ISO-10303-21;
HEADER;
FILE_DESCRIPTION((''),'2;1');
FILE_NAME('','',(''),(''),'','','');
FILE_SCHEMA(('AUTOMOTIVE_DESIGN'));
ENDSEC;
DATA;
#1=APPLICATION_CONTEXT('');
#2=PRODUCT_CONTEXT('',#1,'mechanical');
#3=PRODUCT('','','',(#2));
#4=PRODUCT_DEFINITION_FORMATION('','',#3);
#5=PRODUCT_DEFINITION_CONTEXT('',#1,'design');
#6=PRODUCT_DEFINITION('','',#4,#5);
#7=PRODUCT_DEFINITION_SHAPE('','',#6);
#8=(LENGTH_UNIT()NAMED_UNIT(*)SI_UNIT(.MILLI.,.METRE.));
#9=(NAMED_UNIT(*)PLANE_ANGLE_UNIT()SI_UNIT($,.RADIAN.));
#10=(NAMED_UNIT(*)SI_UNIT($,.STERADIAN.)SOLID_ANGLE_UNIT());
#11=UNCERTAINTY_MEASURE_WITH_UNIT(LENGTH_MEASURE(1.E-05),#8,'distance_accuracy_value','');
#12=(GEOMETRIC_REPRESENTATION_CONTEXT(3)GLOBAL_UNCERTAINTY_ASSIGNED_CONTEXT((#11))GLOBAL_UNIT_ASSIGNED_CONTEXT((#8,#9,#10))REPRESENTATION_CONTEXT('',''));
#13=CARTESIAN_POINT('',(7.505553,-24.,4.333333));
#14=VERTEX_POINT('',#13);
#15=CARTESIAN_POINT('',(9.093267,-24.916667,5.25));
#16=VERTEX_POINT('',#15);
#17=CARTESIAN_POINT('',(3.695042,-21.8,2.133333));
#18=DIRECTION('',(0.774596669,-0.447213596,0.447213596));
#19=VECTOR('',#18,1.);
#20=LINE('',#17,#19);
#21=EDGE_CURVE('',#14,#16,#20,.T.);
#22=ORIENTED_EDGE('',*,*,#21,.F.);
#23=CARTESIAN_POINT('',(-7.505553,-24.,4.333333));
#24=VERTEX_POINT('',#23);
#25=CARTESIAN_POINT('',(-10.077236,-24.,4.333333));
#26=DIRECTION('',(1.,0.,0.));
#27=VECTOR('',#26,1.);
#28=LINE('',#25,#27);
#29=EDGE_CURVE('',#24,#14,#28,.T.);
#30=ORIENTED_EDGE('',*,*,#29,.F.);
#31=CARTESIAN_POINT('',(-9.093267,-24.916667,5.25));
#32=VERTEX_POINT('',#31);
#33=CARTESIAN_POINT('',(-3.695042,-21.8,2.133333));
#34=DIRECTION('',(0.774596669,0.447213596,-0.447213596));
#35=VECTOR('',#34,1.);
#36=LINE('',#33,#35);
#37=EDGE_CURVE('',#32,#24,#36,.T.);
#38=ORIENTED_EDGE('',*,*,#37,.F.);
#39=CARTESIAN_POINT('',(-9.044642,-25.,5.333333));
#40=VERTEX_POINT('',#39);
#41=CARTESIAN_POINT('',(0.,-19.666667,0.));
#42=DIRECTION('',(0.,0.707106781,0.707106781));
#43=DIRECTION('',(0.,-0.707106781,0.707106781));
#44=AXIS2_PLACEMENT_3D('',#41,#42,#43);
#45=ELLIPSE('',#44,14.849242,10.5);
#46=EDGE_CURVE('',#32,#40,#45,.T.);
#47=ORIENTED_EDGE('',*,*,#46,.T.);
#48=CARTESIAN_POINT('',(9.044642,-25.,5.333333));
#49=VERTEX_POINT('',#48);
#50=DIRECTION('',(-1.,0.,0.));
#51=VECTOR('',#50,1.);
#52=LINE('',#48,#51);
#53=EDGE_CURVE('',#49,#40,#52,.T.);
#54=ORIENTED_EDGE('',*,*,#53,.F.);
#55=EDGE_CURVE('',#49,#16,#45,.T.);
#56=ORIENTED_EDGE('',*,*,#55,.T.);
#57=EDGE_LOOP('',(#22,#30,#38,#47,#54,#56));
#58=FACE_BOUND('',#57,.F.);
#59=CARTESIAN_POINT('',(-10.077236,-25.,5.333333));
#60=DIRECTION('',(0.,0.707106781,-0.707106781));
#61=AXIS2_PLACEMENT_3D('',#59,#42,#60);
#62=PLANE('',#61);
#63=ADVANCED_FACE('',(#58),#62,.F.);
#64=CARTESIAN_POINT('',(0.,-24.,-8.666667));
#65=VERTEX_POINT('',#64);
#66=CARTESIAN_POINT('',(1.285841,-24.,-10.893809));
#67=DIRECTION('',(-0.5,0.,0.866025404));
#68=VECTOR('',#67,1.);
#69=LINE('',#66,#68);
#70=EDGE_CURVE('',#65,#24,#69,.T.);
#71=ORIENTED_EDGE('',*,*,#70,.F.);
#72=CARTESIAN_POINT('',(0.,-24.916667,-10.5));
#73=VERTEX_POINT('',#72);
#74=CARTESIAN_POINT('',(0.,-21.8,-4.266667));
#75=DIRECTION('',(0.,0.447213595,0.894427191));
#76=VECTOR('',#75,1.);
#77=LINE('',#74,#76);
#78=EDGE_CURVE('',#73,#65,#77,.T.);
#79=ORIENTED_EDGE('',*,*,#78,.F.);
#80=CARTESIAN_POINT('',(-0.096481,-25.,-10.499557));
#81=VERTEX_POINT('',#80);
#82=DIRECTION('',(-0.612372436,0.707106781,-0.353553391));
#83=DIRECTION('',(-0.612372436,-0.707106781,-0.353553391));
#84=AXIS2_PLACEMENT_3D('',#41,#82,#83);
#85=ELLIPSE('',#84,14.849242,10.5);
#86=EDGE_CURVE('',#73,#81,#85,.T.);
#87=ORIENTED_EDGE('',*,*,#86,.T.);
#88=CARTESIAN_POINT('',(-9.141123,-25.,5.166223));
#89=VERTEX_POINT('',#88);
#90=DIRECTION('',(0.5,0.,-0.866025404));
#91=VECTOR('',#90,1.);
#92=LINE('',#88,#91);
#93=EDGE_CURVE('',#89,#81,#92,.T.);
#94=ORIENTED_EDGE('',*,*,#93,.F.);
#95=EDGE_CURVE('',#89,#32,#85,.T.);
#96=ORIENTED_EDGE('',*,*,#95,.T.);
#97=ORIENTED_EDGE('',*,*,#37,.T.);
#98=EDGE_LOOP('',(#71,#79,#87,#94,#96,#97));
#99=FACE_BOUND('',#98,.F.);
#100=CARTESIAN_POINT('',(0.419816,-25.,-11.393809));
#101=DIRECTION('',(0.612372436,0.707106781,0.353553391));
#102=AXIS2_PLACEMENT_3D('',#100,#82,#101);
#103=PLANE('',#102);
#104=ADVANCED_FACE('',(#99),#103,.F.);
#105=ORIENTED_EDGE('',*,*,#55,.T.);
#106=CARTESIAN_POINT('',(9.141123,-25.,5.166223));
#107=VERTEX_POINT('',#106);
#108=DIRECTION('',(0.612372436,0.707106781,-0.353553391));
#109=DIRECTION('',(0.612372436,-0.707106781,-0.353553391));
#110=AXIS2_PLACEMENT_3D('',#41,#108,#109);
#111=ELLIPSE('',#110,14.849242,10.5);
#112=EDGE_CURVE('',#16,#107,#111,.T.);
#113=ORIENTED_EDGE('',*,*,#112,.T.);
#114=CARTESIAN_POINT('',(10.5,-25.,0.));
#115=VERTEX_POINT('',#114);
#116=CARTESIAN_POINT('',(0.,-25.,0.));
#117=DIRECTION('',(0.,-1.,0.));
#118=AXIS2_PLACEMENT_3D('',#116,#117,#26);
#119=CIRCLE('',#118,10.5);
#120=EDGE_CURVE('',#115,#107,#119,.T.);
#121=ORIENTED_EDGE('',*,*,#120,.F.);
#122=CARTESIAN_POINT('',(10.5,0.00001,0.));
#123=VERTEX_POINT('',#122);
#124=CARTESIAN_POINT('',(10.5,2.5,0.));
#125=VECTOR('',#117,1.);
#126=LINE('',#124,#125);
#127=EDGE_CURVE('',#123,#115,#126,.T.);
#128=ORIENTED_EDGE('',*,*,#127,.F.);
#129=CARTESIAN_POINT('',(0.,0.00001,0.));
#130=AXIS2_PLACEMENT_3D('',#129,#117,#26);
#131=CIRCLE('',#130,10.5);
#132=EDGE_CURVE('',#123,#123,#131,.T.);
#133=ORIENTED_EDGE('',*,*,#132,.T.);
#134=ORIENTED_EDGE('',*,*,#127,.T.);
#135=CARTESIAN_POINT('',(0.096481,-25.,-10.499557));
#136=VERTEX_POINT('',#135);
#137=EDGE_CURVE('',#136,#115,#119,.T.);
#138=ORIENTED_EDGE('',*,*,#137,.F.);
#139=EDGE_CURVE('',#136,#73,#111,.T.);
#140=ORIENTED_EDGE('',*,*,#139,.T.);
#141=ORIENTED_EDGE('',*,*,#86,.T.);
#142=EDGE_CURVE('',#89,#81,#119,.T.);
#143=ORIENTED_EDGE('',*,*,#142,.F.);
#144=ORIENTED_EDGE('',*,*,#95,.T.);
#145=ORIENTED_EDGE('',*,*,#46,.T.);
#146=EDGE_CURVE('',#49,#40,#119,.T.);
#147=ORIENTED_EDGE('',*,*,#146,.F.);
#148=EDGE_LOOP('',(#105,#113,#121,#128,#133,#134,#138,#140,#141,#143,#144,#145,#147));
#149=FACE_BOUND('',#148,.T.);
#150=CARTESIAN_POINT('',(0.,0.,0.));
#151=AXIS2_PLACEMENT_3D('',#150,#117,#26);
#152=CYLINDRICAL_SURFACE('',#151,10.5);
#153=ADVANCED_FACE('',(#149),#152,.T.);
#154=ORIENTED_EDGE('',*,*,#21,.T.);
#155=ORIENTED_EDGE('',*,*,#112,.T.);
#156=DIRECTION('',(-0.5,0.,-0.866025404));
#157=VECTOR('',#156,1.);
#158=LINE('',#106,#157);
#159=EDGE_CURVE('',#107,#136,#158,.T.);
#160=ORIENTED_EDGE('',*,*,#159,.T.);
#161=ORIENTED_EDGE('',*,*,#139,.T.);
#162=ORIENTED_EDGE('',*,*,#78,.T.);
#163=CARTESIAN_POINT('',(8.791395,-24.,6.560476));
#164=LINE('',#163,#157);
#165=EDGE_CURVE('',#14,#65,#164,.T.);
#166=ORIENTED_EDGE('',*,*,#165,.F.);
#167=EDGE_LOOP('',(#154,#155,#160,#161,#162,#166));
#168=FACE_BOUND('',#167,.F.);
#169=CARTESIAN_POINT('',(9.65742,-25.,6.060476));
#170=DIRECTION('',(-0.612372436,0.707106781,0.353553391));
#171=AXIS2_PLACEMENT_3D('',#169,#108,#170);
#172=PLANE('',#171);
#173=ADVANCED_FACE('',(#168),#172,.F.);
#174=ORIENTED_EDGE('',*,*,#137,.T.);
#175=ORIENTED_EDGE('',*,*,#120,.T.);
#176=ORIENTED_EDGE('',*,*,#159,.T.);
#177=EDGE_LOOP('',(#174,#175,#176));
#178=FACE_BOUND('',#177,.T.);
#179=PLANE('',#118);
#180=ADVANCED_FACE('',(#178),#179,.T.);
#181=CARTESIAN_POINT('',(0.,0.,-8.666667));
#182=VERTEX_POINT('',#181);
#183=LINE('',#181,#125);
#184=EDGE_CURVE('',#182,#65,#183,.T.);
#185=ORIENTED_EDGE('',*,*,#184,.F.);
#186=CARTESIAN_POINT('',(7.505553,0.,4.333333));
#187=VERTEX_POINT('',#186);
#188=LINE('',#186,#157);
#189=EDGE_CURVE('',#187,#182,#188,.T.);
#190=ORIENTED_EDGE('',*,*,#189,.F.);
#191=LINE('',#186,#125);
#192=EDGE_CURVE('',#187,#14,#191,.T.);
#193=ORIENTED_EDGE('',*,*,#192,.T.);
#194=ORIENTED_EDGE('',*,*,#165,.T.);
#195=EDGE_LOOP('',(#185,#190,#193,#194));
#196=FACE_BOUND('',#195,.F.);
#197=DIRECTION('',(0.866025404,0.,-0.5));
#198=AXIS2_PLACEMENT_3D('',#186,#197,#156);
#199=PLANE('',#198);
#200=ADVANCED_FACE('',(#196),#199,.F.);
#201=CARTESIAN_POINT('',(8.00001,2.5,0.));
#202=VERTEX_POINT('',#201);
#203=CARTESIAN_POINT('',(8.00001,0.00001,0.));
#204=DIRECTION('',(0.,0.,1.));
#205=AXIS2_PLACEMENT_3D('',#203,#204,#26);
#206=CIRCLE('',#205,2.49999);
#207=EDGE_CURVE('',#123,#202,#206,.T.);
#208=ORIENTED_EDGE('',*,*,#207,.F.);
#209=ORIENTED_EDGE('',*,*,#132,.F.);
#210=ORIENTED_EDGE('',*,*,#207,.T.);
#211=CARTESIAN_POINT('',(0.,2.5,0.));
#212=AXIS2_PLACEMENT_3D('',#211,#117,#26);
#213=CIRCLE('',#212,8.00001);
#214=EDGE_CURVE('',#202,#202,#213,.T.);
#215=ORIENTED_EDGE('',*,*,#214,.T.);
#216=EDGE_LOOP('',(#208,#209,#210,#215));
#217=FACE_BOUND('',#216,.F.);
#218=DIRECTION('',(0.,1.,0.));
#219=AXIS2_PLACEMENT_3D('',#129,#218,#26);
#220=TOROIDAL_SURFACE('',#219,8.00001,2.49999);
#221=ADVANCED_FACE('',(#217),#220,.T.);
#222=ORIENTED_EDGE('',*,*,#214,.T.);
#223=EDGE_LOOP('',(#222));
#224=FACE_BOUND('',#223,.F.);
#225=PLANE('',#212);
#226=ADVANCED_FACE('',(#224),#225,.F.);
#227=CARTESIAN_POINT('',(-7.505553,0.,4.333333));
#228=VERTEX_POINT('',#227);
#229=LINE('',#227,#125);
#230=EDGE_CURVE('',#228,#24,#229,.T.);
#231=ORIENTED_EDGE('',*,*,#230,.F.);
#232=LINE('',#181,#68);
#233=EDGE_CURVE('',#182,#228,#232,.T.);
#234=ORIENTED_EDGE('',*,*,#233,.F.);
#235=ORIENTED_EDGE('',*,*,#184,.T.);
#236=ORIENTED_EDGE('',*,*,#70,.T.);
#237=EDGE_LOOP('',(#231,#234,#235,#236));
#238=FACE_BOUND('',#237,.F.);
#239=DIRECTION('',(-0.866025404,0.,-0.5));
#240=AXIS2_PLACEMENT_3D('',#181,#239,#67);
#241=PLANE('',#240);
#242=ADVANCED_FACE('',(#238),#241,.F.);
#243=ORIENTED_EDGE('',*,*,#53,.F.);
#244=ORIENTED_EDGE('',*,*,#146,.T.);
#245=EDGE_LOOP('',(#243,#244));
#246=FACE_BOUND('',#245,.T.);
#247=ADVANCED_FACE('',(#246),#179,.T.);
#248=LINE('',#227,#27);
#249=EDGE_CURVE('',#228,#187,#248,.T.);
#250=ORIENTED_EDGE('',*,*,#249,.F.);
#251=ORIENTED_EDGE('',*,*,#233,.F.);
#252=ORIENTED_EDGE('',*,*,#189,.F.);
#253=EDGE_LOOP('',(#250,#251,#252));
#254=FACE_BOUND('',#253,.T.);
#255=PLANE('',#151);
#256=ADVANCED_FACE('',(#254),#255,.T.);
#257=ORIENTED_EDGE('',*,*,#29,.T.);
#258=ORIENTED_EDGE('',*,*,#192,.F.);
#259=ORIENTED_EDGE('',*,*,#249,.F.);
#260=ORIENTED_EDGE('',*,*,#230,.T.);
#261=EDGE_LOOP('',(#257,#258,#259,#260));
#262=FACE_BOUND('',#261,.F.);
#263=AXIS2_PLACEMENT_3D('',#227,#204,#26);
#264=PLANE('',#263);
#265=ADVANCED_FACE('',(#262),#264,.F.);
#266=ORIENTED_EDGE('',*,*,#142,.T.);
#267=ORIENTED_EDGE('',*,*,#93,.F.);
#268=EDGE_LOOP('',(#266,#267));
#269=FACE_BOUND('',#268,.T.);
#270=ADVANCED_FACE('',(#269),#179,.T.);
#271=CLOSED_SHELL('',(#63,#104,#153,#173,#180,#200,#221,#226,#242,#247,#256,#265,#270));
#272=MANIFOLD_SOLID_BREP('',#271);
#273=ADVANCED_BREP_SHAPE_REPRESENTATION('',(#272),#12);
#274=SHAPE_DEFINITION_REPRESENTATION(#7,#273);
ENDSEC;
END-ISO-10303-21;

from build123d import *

# Parameters (mm, degrees)
F0_R         = 10.5
F1_DEPTH     = 25
F2_R         = 10.5
F3_DEPTH     = 2.5
F4_R         = 2.49999
F5_T4_DEPTH  = 20.1544729749
F5_T10_DEPTH = 20.1544729749
F5_T16_DEPTH = 20.1544729749
F5_T23_DEPTH = 20.1544729749
F5_T27_DEPTH = 20.1544729749
F5_T34_DEPTH = 20.1544729749
F5_T38_DEPTH = 20.1544729749
F5_T45_DEPTH = 20.1544729749
F5_T49_DEPTH = 20.1544729749


# Not quite as in the source:
# - a fillet or chamfer that OpenCascade refuses, or shapes differently, is made with other operations: its cross-section is extruded or revolved along the edge and cut away or added
# - a fillet or chamfer is up to 0.001 mm smaller than in the source, because OpenCascade refuses the exact size


with BuildPart() as f1:
    # F0 (on Front) → F1 (new body)
    with BuildSketch(Plane.XZ):
        Circle(F0_R)
        Polygon((0, -8.6666666667), (-7.5055534995, 4.3333333333), (7.5055534995, 4.3333333333), align=None, mode=Mode.SUBTRACT)
    extrude(amount=F1_DEPTH)

    # F2 (on Front) → F3 (join)
    with BuildSketch(Plane.XZ):
        Circle(F2_R)
    extrude(amount=-F3_DEPTH)

    # F4 (radius 2.5 in the source; OpenCascade refuses exactly that, so slightly less here)
    f4_edges = [f1.edges().sort_by_distance(p)[0] for p in [
        (-10.5, 2.5, 0),
    ]]
    fillet(f4_edges, radius=F4_R)

    # F5: chamfer of 1 on 3 edges, made by hand


with BuildPart() as f5_tool2:
    # F5_s3 → F5_t4 (new body)
    with BuildSketch(Plane(origin=(5.0386182437, 0, -8.7271427981), x_dir=(0, 1, 0), z_dir=(-0.5, 0, 0.8660254038))):
        Polygon((-25, 5.3333333333), (-24, 4.3333333333), (-25, 4.3333333333), align=None)
    extrude(amount=F5_T4_DEPTH)

    split(bisect_by=Plane(origin=(3.7527767497, 0, -2.1666666667), x_dir=(0, 1, 0), z_dir=(-0.8660254038, 0, 0.5)), keep=Keep.TOP)

    split(bisect_by=Plane.XY.offset(4.3333333333), keep=Keep.BOTTOM)


with BuildPart() as f1_1:
    add(f1.part)

    # F5_t1: cut F5_tool2
    add(f5_tool2.part, mode=Mode.SUBTRACT)


with BuildPart() as f5_tool8:
    # F5_s9 → F5_t10 (new body)
    with BuildSketch(Plane.YZ.offset(-10.0772364874)):
        Polygon((-25, 5.3333333333), (-24, 4.3333333333), (-25, 4.3333333333), align=None)
    extrude(amount=F5_T10_DEPTH)

    split(bisect_by=Plane(origin=(3.7527767497, 0, -2.1666666667), x_dir=(0, 1, 0), z_dir=(-0.8660254038, 0, 0.5)), keep=Keep.TOP)

    split(bisect_by=Plane(origin=(-3.7527767497, 0, -2.1666666667), x_dir=(0, 1, 0), z_dir=(0.8660254038, 0, 0.5)), keep=Keep.TOP)


with BuildPart() as f1_2:
    add(f1_1.part)

    # F5_t7: cut F5_tool8
    add(f5_tool8.part, mode=Mode.SUBTRACT)


with BuildPart() as f5_tool14:
    # F5_s15 → F5_t16 (new body)
    with BuildSketch(Plane(origin=(5.0386182437, 0, 8.7271427981), x_dir=(0, 1, 0), z_dir=(-0.5, 0, -0.8660254038))):
        Polygon((-25, 5.3333333333), (-24, 4.3333333333), (-25, 4.3333333333), align=None)
    extrude(amount=F5_T16_DEPTH)

    split(bisect_by=Plane.XY.offset(4.3333333333), keep=Keep.BOTTOM)

    split(bisect_by=Plane(origin=(-3.7527767497, 0, -2.1666666667), x_dir=(0, 1, 0), z_dir=(0.8660254038, 0, 0.5)), keep=Keep.TOP)


with BuildPart() as f1_3:
    add(f1_2.part)

    # F5_t13: cut F5_tool14
    add(f5_tool14.part, mode=Mode.SUBTRACT)


with BuildPart() as f5_tool21:
    # F5_s22 → F5_t23 (new body)
    with BuildSketch(Plane(origin=(5.0386182437, 0, 8.7271427981), x_dir=(0, 1, 0), z_dir=(-0.5, 0, -0.8660254038))):
        Polygon((-25, 5.3333333333), (-24, 4.3333333333), (-25, 4.3333333333), align=None)
    extrude(amount=F5_T23_DEPTH)

    split(bisect_by=Plane(origin=(-3.7527767497, 0, -2.1666666667), x_dir=(0, 1, 0), z_dir=(-0.8660254038, 0, -0.5)), keep=Keep.TOP)


with BuildPart() as f5_tool25:
    # F5_s26 → F5_t27 (new body)
    with BuildSketch(Plane(origin=(5.0386182437, 0, -8.7271427981), x_dir=(0, 1, 0), z_dir=(-0.5, 0, 0.8660254038))):
        Polygon((-25, 5.3333333333), (-24, 4.3333333333), (-25, 4.3333333333), align=None)
    extrude(amount=F5_T27_DEPTH)

    split(bisect_by=Plane(origin=(3.7527767497, 0, -2.1666666667), x_dir=(0, 1, 0), z_dir=(0.8660254038, 0, -0.5)), keep=Keep.TOP)


with BuildPart() as f5_tool21_1:
    add(f5_tool21.part)

    # F5_t29: intersect F5_tool25
    add(f5_tool25.part, mode=Mode.INTERSECT)


with BuildPart() as f1_4:
    add(f1_3.part)

    # F5_t19: cut F5_tool21
    add(f5_tool21_1.part, mode=Mode.SUBTRACT)


with BuildPart() as f5_tool32:
    # F5_s33 → F5_t34 (new body)
    with BuildSketch(Plane(origin=(5.0386182437, 0, -8.7271427981), x_dir=(0, 1, 0), z_dir=(-0.5, 0, 0.8660254038))):
        Polygon((-25, 5.3333333333), (-24, 4.3333333333), (-25, 4.3333333333), align=None)
    extrude(amount=F5_T34_DEPTH)

    split(bisect_by=Plane.XY.offset(4.3333333333), keep=Keep.TOP)


with BuildPart() as f5_tool36:
    # F5_s37 → F5_t38 (new body)
    with BuildSketch(Plane.YZ.offset(-10.0772364874)):
        Polygon((-25, 5.3333333333), (-24, 4.3333333333), (-25, 4.3333333333), align=None)
    extrude(amount=F5_T38_DEPTH)

    split(bisect_by=Plane(origin=(-3.7527767497, 0, -2.1666666667), x_dir=(0, 1, 0), z_dir=(-0.8660254038, 0, -0.5)), keep=Keep.TOP)


with BuildPart() as f5_tool32_1:
    add(f5_tool32.part)

    # F5_t40: intersect F5_tool36
    add(f5_tool36.part, mode=Mode.INTERSECT)


with BuildPart() as f1_5:
    add(f1_4.part)

    # F5_t30: cut F5_tool32
    add(f5_tool32_1.part, mode=Mode.SUBTRACT)


with BuildPart() as f5_tool43:
    # F5_s44 → F5_t45 (new body)
    with BuildSketch(Plane(origin=(5.0386182437, 0, 8.7271427981), x_dir=(0, 1, 0), z_dir=(-0.5, 0, -0.8660254038))):
        Polygon((-25, 5.3333333333), (-24, 4.3333333333), (-25, 4.3333333333), align=None)
    extrude(amount=F5_T45_DEPTH)

    split(bisect_by=Plane.XY.offset(4.3333333333), keep=Keep.TOP)


with BuildPart() as f5_tool47:
    # F5_s48 → F5_t49 (new body)
    with BuildSketch(Plane.YZ.offset(-10.0772364874)):
        Polygon((-25, 5.3333333333), (-24, 4.3333333333), (-25, 4.3333333333), align=None)
    extrude(amount=F5_T49_DEPTH)

    split(bisect_by=Plane(origin=(3.7527767497, 0, -2.1666666667), x_dir=(0, 1, 0), z_dir=(0.8660254038, 0, -0.5)), keep=Keep.TOP)


with BuildPart() as f5_tool43_1:
    add(f5_tool43.part)

    # F5_t51: intersect F5_tool47
    add(f5_tool47.part, mode=Mode.INTERSECT)


with BuildPart() as f1_6:
    add(f1_5.part)

    # F5_t41: cut F5_tool43
    add(f5_tool43_1.part, mode=Mode.SUBTRACT)


solid = f1_6.part
